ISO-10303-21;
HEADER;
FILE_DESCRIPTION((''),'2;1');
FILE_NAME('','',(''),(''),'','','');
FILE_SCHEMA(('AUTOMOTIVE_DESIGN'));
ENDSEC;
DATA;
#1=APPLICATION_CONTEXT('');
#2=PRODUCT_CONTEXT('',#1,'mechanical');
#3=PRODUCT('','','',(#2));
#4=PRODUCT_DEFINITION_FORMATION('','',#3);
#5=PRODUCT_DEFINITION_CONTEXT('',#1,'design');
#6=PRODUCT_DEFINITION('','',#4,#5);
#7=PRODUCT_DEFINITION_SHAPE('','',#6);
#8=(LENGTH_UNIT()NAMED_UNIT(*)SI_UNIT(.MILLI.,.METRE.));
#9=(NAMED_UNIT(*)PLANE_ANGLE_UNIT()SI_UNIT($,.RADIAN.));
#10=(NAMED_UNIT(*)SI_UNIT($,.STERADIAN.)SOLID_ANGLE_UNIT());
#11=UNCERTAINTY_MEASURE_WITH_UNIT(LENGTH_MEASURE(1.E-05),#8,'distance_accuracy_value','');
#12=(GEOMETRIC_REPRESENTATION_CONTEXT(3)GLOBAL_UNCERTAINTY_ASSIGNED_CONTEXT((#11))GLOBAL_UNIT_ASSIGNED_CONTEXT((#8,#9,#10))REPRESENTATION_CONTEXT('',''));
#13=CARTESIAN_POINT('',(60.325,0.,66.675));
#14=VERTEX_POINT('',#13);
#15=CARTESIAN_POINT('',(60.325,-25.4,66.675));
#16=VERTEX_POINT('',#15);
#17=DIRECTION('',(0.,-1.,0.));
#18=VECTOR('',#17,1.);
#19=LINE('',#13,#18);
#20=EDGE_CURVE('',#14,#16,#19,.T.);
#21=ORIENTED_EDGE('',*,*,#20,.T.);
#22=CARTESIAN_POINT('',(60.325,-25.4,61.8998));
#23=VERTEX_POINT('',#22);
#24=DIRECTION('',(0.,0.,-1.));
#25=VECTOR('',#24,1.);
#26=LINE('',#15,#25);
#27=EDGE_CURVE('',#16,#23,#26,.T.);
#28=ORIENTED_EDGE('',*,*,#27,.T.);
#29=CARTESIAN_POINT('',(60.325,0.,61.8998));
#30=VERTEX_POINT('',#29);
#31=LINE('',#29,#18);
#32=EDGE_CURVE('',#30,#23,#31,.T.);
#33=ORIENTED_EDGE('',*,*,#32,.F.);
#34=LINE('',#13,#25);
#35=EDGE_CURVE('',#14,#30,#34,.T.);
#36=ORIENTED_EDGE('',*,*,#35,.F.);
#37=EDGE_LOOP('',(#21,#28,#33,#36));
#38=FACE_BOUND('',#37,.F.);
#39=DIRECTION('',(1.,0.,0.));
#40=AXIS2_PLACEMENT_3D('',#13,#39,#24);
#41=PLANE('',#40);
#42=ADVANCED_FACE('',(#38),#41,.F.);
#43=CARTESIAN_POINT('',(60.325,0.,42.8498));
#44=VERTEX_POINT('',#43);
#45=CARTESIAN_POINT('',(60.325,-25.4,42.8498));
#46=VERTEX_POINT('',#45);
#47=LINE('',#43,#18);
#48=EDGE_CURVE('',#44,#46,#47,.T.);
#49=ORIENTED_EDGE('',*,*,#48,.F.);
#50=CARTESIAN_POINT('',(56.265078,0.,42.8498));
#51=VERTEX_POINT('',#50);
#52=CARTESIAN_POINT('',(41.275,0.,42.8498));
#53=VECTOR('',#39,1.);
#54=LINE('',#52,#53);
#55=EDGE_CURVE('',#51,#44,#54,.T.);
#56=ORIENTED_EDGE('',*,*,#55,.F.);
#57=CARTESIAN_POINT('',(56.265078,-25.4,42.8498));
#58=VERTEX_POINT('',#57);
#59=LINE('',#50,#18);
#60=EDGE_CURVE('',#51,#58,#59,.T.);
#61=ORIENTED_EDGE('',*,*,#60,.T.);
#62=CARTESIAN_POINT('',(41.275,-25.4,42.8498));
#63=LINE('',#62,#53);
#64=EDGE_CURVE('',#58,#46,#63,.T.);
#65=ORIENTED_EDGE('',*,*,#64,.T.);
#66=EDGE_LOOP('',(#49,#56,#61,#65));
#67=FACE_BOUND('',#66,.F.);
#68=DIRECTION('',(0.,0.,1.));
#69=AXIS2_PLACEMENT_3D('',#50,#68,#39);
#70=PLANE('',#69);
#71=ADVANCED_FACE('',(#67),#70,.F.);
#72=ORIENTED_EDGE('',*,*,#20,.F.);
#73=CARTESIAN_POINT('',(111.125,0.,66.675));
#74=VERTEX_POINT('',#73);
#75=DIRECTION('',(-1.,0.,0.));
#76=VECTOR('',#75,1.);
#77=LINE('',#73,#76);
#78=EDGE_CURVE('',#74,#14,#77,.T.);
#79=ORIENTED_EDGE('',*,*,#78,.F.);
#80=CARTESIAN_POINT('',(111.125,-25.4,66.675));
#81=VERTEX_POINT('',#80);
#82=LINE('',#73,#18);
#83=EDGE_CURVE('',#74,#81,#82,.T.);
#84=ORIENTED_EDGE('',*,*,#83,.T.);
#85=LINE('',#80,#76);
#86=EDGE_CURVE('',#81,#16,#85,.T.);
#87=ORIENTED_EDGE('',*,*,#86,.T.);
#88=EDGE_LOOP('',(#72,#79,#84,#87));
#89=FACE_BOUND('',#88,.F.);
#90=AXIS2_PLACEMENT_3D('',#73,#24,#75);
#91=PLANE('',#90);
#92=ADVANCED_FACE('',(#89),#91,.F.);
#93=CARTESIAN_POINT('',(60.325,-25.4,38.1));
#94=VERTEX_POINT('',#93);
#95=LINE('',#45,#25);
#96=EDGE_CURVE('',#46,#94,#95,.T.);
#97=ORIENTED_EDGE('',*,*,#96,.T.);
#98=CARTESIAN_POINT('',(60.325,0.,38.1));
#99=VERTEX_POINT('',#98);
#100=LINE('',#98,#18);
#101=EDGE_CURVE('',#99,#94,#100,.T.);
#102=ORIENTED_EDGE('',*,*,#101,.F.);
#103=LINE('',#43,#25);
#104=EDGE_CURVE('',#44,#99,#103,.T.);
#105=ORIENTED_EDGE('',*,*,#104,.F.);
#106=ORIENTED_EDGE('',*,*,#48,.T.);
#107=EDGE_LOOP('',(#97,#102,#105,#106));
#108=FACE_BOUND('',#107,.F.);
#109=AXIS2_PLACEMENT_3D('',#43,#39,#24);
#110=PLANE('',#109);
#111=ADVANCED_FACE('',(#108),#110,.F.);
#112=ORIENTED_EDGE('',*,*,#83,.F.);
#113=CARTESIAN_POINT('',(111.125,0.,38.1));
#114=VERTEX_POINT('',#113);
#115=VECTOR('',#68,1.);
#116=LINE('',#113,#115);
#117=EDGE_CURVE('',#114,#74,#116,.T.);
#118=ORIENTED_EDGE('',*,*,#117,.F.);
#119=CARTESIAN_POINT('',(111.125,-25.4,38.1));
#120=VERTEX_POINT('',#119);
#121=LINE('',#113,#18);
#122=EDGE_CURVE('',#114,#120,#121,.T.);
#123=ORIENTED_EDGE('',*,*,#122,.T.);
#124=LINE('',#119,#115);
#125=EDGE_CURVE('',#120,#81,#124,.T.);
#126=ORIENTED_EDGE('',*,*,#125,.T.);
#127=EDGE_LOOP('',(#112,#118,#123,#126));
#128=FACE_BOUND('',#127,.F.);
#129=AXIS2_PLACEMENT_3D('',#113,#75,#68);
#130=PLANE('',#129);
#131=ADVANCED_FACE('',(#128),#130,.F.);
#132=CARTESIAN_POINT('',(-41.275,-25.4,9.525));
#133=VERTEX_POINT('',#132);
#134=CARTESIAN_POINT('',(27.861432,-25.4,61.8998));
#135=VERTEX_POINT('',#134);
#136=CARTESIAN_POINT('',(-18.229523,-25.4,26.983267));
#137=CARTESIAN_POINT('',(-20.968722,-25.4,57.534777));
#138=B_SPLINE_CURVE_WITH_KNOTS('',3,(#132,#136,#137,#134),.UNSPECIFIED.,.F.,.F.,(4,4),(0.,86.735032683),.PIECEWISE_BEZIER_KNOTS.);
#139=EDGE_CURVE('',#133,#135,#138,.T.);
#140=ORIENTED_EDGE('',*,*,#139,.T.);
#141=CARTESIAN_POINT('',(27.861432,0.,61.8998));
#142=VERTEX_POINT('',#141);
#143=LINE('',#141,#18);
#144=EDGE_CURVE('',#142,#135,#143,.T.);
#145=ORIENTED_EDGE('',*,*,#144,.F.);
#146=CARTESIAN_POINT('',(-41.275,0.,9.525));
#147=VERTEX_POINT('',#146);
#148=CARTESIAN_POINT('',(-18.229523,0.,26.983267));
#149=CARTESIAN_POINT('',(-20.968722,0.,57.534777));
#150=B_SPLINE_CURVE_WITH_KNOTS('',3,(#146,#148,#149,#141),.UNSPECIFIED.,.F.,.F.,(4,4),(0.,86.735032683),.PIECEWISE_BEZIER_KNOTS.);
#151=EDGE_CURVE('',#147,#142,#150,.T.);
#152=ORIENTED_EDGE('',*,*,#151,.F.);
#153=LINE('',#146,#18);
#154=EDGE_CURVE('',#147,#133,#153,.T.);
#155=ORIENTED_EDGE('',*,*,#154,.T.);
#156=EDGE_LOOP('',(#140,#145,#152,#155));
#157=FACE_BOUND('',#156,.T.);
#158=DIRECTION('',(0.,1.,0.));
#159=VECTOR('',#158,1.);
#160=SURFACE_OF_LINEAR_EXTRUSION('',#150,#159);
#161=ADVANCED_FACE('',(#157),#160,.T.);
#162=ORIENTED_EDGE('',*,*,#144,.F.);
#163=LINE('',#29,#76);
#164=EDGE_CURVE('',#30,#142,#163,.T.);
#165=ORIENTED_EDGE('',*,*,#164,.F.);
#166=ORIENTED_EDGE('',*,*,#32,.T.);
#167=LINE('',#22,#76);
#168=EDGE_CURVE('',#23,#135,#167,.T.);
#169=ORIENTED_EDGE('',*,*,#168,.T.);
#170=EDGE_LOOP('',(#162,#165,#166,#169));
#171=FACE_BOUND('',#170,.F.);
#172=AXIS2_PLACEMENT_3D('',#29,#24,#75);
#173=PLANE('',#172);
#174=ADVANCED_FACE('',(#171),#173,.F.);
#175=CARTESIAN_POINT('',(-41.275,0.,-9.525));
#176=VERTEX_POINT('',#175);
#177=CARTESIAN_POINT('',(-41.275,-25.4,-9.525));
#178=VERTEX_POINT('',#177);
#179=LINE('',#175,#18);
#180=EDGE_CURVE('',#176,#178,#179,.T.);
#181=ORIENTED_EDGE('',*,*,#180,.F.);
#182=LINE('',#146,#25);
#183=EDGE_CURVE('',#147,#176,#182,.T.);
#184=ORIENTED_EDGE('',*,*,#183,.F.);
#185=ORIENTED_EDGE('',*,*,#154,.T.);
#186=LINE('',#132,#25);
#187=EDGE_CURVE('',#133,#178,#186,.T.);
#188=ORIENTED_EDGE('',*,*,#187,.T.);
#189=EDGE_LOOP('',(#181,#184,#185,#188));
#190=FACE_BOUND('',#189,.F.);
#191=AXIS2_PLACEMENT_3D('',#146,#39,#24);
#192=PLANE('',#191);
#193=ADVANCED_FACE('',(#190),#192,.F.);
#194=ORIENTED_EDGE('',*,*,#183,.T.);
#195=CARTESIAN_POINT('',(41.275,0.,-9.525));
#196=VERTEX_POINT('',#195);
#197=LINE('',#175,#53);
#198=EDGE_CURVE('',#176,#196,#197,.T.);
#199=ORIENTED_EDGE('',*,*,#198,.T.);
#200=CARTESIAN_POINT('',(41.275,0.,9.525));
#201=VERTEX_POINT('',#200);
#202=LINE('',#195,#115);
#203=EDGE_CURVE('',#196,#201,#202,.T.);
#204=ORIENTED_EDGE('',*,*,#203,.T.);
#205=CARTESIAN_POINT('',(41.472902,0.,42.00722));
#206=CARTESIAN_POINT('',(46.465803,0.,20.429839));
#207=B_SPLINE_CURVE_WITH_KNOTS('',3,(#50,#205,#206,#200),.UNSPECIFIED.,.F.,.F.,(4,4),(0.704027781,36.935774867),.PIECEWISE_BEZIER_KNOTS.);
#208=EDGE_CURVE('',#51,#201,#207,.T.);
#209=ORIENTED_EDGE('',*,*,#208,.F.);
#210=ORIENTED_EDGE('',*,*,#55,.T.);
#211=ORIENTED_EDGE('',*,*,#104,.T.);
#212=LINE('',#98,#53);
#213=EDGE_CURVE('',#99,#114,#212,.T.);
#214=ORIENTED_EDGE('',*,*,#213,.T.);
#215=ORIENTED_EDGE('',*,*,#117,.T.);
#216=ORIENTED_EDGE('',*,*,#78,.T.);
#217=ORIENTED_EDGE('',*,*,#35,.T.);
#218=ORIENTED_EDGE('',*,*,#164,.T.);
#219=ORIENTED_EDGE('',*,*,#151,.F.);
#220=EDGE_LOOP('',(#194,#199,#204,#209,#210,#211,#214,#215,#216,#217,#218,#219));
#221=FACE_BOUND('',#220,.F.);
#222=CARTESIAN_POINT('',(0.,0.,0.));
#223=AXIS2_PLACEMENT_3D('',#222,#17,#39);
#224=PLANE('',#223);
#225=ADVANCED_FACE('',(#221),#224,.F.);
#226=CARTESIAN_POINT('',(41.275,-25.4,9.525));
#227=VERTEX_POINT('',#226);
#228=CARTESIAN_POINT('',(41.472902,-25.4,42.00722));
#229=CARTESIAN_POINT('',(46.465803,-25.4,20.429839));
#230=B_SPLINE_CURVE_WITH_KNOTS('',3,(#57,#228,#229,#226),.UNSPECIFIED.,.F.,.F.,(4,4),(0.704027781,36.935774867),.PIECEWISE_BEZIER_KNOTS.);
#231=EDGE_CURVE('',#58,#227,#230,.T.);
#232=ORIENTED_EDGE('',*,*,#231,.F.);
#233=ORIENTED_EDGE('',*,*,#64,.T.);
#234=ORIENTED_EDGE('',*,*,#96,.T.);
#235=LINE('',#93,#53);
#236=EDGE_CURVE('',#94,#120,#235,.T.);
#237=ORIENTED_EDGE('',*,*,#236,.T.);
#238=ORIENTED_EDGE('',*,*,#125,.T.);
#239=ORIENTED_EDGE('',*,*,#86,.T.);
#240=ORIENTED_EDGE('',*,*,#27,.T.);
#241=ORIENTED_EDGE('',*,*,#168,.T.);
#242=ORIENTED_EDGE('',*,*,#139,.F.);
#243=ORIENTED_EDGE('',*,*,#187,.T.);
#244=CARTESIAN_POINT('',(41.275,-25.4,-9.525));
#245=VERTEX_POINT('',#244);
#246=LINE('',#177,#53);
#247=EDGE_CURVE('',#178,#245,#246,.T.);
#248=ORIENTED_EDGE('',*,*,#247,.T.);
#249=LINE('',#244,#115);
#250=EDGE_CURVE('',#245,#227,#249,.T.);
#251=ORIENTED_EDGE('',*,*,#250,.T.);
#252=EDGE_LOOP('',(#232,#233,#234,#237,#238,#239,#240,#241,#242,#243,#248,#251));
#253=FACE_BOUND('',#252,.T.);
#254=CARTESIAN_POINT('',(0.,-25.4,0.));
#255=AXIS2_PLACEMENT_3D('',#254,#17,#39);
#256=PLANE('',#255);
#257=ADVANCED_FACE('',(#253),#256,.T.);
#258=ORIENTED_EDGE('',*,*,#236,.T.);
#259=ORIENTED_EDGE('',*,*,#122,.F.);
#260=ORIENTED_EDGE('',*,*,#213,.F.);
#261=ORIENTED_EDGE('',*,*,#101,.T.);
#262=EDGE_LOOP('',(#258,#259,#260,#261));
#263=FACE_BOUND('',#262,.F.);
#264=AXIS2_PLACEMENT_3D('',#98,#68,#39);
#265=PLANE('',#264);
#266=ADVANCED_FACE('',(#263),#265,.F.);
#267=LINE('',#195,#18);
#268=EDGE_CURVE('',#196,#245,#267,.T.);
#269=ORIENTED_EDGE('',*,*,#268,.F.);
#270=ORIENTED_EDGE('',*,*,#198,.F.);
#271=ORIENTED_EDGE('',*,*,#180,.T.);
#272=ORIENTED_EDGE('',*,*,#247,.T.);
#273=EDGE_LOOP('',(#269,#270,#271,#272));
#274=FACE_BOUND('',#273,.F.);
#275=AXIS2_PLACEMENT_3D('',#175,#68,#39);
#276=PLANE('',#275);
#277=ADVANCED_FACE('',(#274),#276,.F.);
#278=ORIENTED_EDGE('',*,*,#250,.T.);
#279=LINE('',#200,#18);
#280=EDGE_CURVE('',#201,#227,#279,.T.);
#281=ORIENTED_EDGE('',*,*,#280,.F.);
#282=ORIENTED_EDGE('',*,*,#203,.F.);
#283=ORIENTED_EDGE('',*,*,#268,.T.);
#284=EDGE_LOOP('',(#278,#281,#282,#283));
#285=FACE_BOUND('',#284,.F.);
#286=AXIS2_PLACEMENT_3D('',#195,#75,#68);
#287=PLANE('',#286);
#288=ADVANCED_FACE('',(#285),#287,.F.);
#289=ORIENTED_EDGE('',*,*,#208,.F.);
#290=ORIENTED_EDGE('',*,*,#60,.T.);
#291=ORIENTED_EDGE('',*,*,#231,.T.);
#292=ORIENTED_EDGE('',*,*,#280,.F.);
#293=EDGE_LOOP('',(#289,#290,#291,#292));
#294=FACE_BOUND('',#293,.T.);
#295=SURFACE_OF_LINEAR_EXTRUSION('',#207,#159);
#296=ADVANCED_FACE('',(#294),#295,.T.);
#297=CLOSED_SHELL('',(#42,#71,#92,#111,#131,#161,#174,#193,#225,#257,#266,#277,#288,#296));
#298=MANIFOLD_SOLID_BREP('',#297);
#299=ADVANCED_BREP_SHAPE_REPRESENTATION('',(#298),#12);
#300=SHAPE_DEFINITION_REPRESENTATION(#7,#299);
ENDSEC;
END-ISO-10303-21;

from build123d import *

# Parameters (mm, degrees)
F0_W     = 23.8088733172
F0_H     = 19.05
F1_DEPTH = 25.4


# Not quite as in the source:
# - ends of sketch curves that miss each other by under 0.0002 mm in the source are joined


with BuildPart() as f1:
    # F0 (on Front) → F1 (new body)
    with BuildSketch(Plane.XZ):
        Polygon((-41.275, -9.525), (41.275, -9.525), (41.275, 9.525), (22.225, 9.525), (-41.275, 9.525), align=None)
        with BuildLine():
            Line((22.225, 9.525), (41.275, 9.525))
            Line((41.275, 9.525), (41.275, 42.8498))
            Line((41.275, 42.8498), (56.2650781978, 42.8498))
            Line((56.2650781978, 42.8498), (60.325, 42.8498))
            Line((60.325, 42.8498), (60.325, 61.8998))
            Line((60.325, 61.8998), (27.8614319257, 61.8998))
            ThreePointArc((27.8614319257, 61.8998), (23.6637426323, 52.7961975559), (22.225, 42.8752))
            Line((22.225, 42.8752), (22.225, 9.525))
        make_face()
        with BuildLine():
            Line((41.275, 42.8498), (41.275, 9.525))
            add(Edge.make_bspline(
                [(56.2650781978, 42.8498), (41.47290193, 42.0072197884), (46.465802928, 20.4298387912), (41.275, 9.525)],
                knots=[0.7040277811, 0.7040277811, 0.7040277811, 0.7040277811, 36.9357748672, 36.9357748672, 36.9357748672, 36.9357748672], degree=3))
            Line((56.2650781978, 42.8498), (41.275, 42.8498))
        make_face()
        with BuildLine():
            add(Edge.make_bspline(
                [(-41.275, 9.525), (-18.2295226914, 26.9832666667), (-20.9687221795, 57.534776628), (27.8614319257, 61.8998)],
                knots=[0, 0, 0, 0, 86.7350326827, 86.7350326827, 86.7350326827, 86.7350326827], degree=3))
            Line((-41.275, 9.525), (22.225, 9.525))
            Line((22.225, 9.525), (22.225, 42.8752))
            ThreePointArc((22.225, 42.8752), (23.6637426323, 52.7961975559), (27.8614319257, 61.8998))
        make_face()
        Polygon((84.1338733172, 42.8498), (60.325, 42.8498), (60.325, 38.1), (111.125, 38.1), (111.125, 66.675), (60.325, 66.675), (60.325, 61.8998), (84.1338733172, 61.8998), align=None)
        with Locations((72.2294366586, 52.3748)):
            Rectangle(F0_W, F0_H)
    extrude(amount=F1_DEPTH)


solid = f1.part
